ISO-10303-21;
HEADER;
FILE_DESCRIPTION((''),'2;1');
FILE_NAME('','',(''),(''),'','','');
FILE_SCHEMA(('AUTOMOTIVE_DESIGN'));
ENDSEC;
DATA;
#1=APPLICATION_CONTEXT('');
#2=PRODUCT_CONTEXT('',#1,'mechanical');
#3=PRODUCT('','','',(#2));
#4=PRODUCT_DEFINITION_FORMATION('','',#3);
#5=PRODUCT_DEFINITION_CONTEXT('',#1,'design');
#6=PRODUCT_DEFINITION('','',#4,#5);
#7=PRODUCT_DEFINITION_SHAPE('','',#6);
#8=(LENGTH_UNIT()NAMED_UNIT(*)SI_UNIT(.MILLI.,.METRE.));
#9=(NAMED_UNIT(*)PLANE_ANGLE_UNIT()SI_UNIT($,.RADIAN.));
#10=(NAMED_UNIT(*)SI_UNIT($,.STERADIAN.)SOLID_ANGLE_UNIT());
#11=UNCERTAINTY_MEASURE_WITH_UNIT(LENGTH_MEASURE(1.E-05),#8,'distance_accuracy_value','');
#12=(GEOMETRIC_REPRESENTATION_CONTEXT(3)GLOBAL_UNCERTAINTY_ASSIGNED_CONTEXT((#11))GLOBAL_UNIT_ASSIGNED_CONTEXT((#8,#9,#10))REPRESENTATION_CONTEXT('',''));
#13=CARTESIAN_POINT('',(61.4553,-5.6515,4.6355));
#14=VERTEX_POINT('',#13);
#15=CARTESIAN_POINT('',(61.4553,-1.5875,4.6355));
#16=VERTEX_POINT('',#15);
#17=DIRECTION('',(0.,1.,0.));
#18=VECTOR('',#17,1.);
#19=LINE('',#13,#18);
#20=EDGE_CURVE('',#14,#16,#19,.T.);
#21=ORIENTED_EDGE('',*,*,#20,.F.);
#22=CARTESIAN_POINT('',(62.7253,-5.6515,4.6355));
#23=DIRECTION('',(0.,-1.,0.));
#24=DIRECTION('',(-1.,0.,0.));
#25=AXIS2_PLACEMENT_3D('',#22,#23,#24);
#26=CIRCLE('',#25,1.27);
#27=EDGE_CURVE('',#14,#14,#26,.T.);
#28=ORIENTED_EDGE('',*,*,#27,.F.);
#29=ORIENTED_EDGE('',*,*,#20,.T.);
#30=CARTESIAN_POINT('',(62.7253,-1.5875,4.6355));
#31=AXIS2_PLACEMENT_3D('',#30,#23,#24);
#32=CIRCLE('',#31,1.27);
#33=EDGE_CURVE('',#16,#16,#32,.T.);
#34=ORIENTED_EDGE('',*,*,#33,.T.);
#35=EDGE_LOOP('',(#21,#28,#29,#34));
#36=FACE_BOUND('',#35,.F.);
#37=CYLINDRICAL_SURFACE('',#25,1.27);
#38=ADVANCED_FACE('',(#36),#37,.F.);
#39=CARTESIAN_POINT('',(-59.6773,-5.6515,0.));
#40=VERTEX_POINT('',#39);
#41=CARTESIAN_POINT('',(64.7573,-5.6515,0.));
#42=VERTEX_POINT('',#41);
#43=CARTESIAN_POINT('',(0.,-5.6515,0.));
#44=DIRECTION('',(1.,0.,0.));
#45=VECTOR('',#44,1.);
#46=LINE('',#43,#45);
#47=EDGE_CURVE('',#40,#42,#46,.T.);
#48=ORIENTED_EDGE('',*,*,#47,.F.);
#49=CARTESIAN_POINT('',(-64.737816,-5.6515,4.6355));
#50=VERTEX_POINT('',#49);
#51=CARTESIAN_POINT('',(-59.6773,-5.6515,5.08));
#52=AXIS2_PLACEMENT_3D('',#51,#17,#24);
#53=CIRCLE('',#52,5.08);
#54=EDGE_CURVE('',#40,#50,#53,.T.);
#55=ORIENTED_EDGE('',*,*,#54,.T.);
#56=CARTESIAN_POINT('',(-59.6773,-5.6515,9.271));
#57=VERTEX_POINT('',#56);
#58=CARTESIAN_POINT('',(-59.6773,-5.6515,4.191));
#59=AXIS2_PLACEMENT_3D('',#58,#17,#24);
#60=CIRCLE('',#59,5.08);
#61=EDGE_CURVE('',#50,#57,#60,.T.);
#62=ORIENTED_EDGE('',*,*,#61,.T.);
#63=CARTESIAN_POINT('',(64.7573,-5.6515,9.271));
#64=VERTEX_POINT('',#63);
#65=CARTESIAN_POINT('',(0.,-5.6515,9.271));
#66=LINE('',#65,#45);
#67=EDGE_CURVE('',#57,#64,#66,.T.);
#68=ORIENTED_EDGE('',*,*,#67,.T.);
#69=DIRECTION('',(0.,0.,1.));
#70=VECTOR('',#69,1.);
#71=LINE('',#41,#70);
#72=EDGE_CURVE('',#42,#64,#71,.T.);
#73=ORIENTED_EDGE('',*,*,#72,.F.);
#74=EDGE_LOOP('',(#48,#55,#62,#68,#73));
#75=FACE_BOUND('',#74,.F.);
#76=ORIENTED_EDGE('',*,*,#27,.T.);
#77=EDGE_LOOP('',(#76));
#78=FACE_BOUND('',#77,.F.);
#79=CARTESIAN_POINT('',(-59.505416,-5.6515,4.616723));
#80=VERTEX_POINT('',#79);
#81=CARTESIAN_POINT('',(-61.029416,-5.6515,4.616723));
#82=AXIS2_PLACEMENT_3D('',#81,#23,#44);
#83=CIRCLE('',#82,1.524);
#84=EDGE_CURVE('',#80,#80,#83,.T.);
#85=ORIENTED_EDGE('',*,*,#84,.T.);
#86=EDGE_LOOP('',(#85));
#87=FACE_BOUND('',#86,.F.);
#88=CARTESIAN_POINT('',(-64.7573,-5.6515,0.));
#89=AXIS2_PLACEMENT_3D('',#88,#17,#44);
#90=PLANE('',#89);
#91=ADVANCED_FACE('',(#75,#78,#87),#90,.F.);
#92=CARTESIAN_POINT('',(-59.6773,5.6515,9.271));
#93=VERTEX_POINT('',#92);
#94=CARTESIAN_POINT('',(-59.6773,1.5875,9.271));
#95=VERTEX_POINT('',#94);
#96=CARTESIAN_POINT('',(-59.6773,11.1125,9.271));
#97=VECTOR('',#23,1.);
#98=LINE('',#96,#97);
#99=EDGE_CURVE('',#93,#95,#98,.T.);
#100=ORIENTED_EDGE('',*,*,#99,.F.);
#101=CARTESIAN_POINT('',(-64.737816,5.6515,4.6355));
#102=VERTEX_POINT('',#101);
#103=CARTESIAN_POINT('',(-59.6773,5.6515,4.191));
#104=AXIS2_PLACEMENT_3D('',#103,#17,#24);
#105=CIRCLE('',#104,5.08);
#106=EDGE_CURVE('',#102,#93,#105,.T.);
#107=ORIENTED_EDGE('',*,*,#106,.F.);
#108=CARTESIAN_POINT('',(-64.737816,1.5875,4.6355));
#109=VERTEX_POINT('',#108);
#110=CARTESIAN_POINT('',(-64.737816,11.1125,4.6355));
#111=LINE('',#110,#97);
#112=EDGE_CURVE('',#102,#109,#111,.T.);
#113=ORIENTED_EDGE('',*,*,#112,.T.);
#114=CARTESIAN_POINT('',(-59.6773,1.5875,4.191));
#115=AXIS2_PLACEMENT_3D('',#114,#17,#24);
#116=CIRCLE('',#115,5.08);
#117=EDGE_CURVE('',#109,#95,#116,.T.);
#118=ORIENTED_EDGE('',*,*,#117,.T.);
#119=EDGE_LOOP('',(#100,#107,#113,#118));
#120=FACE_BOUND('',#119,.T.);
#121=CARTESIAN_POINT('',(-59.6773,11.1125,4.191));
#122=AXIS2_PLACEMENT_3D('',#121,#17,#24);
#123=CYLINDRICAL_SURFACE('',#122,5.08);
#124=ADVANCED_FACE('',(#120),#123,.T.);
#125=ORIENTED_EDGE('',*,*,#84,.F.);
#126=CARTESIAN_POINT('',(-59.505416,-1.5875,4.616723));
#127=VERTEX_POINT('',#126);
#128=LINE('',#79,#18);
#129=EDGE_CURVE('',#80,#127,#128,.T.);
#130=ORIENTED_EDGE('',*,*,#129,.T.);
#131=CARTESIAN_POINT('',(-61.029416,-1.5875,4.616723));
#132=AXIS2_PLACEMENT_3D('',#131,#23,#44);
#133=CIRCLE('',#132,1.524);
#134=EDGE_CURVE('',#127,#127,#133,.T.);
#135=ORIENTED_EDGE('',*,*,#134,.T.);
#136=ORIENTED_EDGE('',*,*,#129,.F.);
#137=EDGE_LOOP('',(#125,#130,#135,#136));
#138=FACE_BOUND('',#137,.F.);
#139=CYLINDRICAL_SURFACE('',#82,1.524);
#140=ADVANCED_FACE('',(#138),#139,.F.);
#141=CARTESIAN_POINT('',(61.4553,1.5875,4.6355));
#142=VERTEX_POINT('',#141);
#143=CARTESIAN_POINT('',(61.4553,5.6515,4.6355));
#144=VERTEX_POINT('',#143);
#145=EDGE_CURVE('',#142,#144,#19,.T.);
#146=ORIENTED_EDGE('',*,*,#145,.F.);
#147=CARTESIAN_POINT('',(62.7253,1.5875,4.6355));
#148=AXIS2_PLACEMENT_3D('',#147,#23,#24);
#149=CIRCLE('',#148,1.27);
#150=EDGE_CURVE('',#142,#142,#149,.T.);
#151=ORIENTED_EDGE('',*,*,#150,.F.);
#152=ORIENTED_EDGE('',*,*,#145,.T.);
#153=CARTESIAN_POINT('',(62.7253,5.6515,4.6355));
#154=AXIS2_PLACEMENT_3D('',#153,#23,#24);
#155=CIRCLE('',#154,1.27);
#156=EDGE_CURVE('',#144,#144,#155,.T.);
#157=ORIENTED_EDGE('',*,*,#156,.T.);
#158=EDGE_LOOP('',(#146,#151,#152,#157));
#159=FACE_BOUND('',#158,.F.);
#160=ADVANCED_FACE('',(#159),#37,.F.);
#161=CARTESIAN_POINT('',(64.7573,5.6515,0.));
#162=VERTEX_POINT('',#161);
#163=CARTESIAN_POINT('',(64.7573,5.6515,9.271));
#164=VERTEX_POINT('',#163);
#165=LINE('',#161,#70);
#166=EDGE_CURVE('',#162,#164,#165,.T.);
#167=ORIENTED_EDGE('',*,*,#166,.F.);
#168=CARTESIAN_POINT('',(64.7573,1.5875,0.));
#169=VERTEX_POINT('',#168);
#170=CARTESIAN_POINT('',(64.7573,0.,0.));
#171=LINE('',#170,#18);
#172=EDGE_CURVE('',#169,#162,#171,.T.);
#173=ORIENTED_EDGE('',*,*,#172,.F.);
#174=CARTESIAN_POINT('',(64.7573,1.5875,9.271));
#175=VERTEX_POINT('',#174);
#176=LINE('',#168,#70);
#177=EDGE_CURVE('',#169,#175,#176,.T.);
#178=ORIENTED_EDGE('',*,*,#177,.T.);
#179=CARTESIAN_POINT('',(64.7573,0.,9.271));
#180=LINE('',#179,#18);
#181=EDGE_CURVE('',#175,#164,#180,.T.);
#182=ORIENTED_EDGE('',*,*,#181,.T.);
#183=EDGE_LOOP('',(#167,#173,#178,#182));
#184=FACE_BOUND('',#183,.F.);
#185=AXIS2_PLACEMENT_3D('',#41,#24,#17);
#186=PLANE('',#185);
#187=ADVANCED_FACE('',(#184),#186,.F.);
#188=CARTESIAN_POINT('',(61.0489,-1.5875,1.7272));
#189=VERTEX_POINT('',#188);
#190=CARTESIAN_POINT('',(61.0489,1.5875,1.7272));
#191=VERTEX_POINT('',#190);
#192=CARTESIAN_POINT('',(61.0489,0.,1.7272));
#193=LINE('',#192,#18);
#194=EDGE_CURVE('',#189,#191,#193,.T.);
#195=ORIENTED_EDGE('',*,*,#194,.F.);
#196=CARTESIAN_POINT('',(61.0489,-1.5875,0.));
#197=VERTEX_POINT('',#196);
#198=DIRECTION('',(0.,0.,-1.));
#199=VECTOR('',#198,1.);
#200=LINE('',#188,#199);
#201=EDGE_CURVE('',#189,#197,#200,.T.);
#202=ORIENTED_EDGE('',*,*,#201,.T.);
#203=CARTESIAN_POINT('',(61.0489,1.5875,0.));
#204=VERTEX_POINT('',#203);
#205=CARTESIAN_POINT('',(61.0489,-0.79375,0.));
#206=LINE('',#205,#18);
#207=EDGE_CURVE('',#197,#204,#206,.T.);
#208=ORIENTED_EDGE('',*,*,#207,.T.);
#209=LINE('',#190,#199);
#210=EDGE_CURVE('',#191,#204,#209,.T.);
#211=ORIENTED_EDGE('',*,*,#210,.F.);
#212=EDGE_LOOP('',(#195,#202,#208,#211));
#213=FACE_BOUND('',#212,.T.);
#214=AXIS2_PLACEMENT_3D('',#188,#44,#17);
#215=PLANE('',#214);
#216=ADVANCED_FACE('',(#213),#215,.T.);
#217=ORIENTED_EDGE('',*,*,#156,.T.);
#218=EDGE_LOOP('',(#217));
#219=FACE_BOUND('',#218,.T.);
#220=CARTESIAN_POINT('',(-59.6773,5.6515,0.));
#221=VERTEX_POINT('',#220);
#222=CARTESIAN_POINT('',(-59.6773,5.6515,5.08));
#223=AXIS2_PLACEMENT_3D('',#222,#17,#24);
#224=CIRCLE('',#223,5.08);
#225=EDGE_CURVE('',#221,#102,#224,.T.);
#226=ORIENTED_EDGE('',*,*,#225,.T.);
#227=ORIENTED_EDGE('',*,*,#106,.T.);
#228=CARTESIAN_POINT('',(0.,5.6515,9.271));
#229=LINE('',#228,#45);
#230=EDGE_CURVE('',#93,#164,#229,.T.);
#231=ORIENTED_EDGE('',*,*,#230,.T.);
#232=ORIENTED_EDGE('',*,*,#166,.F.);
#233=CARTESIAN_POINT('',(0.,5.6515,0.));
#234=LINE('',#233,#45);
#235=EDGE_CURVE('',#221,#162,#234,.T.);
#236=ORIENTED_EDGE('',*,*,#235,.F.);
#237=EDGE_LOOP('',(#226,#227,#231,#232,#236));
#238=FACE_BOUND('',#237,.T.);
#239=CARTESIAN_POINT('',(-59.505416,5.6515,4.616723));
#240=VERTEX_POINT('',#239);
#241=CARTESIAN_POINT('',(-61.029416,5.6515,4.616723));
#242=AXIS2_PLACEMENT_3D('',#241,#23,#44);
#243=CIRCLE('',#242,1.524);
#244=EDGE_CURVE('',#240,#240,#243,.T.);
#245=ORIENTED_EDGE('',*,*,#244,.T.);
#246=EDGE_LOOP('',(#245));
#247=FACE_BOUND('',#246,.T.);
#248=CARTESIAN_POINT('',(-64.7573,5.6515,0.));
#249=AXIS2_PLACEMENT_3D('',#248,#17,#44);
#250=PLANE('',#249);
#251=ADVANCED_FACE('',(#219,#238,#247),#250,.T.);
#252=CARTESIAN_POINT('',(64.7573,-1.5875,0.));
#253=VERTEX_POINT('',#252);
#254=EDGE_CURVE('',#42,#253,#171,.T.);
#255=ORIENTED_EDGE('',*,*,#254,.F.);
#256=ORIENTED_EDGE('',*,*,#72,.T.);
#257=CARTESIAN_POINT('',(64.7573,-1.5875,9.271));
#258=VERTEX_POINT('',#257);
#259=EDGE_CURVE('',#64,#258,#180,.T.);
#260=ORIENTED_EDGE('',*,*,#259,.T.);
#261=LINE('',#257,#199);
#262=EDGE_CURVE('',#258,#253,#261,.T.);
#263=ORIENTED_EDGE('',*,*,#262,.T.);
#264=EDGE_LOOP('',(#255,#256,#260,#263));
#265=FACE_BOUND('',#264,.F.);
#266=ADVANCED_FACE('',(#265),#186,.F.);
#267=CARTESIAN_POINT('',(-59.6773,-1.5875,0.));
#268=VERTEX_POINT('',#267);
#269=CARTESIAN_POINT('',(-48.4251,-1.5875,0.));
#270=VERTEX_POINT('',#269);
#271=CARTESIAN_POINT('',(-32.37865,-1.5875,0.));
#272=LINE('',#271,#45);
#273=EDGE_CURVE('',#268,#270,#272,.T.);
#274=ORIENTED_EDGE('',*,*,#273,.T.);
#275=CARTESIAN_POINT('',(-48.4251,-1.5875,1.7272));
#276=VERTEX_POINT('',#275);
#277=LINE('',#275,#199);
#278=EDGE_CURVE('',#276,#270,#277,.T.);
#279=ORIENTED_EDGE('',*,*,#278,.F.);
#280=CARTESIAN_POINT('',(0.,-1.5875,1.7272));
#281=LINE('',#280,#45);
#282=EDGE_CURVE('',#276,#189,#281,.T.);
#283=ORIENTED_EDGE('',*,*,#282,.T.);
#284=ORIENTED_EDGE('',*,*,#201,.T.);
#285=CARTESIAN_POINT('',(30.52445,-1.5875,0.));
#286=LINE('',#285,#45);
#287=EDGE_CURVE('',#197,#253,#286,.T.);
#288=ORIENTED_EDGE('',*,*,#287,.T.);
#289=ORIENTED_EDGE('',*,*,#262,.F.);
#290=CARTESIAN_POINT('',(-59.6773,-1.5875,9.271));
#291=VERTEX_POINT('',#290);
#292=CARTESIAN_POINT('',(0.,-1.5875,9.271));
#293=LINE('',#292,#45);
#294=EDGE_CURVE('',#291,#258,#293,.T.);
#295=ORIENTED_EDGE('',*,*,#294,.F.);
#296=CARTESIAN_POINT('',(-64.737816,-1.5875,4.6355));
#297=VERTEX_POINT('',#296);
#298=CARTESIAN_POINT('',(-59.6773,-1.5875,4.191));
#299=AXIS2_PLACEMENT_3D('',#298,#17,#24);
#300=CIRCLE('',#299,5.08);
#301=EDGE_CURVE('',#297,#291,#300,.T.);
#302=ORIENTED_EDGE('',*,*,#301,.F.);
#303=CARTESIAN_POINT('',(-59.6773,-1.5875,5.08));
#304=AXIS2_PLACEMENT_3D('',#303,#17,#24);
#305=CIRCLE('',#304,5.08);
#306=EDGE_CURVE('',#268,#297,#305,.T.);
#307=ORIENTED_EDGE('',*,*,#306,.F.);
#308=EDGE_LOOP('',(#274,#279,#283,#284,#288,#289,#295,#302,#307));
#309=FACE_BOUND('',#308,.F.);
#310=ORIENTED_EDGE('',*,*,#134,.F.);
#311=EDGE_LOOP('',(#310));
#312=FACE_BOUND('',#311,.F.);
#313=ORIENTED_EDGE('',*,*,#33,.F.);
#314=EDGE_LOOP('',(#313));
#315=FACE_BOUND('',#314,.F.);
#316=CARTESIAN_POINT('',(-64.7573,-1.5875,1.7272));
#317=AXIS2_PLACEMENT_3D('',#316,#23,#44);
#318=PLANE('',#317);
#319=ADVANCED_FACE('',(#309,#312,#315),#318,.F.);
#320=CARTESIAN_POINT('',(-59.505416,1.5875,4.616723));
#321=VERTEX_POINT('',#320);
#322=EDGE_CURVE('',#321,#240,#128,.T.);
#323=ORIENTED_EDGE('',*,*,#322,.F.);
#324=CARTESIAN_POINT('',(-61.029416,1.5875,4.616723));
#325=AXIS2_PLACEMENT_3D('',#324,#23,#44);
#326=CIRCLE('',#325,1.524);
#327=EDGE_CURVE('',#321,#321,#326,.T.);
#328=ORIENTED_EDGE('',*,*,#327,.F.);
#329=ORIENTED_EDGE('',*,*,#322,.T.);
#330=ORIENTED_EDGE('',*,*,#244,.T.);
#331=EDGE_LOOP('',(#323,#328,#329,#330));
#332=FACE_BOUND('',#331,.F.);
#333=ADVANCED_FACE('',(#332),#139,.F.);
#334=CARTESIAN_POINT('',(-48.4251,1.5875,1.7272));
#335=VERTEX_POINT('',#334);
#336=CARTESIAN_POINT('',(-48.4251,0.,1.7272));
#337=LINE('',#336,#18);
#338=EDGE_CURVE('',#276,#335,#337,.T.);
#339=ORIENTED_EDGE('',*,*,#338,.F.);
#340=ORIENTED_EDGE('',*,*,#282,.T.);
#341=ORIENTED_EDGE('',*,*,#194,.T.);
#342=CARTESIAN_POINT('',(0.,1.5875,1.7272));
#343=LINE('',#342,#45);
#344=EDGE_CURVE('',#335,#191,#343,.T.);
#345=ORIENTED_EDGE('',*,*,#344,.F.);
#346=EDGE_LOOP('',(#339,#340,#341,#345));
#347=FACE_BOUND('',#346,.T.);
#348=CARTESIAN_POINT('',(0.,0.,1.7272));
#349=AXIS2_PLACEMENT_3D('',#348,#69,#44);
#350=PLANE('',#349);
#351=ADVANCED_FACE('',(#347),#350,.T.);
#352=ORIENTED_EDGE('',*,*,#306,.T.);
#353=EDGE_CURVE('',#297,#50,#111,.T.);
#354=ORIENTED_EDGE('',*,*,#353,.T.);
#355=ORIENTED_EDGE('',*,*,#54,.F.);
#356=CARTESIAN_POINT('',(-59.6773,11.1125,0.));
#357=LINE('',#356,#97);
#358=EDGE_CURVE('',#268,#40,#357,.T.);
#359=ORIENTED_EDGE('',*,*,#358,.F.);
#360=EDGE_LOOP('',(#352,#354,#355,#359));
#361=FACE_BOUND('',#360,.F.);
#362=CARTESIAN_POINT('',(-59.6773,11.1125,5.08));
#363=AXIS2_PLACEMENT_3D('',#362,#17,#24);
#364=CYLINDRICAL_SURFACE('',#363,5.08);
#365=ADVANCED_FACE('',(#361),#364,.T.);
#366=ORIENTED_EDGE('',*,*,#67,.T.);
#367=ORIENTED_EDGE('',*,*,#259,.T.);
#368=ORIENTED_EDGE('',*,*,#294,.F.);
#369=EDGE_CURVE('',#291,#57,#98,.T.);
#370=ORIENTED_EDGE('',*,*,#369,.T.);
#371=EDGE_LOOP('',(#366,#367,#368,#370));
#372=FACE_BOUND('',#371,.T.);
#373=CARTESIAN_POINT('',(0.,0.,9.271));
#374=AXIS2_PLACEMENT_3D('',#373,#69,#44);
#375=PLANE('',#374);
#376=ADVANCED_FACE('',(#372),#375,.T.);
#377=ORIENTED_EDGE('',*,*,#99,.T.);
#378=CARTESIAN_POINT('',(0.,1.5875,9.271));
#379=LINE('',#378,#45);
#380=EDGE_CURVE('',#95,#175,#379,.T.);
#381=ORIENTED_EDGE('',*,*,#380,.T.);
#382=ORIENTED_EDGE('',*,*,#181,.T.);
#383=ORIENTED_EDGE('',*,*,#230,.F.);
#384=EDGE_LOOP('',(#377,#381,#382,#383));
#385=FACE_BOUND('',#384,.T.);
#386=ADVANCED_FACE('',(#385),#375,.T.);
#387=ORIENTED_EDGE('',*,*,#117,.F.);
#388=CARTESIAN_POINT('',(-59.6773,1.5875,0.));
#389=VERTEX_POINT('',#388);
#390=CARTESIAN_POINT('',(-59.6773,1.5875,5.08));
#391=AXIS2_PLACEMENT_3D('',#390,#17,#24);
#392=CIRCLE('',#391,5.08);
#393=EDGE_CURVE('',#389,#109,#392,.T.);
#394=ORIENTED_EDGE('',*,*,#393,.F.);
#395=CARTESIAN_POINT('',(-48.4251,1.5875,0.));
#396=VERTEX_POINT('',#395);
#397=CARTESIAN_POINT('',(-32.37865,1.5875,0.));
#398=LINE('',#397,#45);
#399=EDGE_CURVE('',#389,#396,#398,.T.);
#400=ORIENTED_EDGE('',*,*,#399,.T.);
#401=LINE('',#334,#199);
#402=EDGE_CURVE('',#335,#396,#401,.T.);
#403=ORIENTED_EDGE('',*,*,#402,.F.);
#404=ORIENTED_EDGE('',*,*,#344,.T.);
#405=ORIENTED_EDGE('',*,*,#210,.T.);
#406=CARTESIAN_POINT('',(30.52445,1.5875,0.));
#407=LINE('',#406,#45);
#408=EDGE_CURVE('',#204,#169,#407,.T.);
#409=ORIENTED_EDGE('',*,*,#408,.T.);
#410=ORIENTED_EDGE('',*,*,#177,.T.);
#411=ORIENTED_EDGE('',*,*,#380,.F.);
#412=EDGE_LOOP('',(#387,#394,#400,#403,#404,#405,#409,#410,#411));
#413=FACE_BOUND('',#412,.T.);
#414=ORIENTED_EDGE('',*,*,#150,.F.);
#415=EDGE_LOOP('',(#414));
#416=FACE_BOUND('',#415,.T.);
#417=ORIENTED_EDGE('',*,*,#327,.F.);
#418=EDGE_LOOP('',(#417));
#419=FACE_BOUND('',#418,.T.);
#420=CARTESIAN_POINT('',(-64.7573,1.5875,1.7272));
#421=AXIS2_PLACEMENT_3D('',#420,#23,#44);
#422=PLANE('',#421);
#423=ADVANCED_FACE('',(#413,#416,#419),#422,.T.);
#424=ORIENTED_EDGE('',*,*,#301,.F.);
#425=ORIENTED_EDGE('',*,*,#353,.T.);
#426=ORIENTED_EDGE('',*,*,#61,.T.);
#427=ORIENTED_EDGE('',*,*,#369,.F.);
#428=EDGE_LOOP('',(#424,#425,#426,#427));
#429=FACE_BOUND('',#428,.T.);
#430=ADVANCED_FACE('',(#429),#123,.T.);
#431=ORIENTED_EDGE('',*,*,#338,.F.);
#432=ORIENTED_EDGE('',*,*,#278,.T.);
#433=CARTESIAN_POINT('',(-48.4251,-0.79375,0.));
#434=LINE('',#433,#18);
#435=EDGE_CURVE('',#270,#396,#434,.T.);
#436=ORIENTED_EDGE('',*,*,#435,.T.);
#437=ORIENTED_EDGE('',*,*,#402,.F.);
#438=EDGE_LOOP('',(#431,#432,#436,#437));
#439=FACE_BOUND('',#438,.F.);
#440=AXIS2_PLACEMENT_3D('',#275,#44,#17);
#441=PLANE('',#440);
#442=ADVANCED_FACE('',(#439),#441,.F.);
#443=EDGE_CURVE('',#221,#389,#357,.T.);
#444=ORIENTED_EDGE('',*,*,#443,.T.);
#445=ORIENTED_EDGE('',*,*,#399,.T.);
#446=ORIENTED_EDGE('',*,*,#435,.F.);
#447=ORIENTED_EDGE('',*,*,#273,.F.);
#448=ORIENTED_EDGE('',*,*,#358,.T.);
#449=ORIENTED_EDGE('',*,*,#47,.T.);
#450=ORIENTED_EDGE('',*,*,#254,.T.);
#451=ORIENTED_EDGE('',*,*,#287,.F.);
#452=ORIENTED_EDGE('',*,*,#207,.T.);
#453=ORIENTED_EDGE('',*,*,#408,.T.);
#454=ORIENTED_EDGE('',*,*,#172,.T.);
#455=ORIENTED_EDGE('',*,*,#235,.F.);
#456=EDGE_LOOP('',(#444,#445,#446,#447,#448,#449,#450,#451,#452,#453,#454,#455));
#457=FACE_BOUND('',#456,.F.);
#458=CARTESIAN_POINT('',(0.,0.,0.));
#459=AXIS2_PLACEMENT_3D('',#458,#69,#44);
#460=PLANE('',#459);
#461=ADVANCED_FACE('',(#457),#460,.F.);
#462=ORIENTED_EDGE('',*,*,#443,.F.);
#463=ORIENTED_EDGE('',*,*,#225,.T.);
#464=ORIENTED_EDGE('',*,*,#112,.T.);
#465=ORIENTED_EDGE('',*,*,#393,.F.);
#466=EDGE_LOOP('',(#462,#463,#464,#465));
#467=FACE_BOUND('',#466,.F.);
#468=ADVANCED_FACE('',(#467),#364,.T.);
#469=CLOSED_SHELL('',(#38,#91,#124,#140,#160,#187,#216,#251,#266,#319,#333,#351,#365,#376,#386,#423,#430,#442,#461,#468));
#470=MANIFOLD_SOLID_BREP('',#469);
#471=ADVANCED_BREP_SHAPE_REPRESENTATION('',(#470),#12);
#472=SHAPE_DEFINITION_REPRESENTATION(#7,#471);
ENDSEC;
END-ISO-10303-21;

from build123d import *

# Parameters (mm, degrees)
F0_W        = 129.5146
F0_H        = 11.303
F1_DEPTH    = 9.271
F2_W        = 206.3660303733
F2_H        = 3.175
F3_DEPTH    = 7.5438
F4_W        = 3.7084
F4_H        = 3.175
F5_DEPTH    = 25.4
F6_W        = 16.3322
F6_H        = 3.175
F7_DEPTH    = 25.4
F8_T1_DEPTH = 29.464
F8_T3_DEPTH = 29.464
F9_R        = 1.524
F10_DEPTH   = 25.4
F12_DEPTH   = 25.4
F13_W       = 11.2141259015
F13_H       = 1.2269735361
F14_DEPTH   = 4.1656
F15_DEPTH   = 0.254
F16_DEPTH   = 3.175
F16_FACE_W  = 4.4019735361
F16_FACE_H  = 4.1656
F17_ANGLE   = 90


# Not quite as in the source:
# - a fillet or chamfer that OpenCascade refuses, or shapes differently, is made with other operations: its cross-section is extruded or revolved along the edge and cut away or added


with BuildPart() as f1:
    # F0 (on Top) → F1 (new body)
    with BuildSketch(Plane.XY):
        Rectangle(F0_W, F0_H)
    extrude(amount=F1_DEPTH)

    # F2 (on face) → F3 (cut)
    with BuildSketch(Plane.XY.offset(9.271)):
        Rectangle(F2_W, F2_H)
    extrude(amount=-F3_DEPTH, mode=Mode.SUBTRACT)

    # F4 (on face) → F5 (cut)
    with BuildSketch(Plane.XY.offset(1.7272)):
        with Locations((62.9031, 0)):
            Rectangle(F4_W, F4_H)
    extrude(amount=-F5_DEPTH, mode=Mode.SUBTRACT)

    # F6 (on face) → F7 (cut)
    with BuildSketch(Plane.XY.offset(1.7272)):
        with Locations((-56.5912, 0)):
            Rectangle(F6_W, F6_H)
    extrude(amount=-F7_DEPTH, mode=Mode.SUBTRACT)

    # F8: fillet of radius 5.08 on 4 edges, made by hand

    # F8_s2 → F8_t1 (cut)
    with BuildSketch(Plane.XZ.offset(-11.1125)):
        with BuildLine():
            ThreePointArc((-64.7573, 4.191), (-63.2694024484, 7.7831024484), (-59.6773, 9.271))
            Line((-59.6773, 9.271), (-64.7573, 9.271))
            Line((-64.7573, 9.271), (-64.7573, 4.191))
        make_face()
        with BuildLine():
            ThreePointArc((-64.7573, 5.08), (-63.2694024484, 1.4878975516), (-59.6773, 0))
            Line((-59.6773, 0), (-64.7573, 0))
            Line((-64.7573, 0), (-64.7573, 5.08))
        make_face()
    extrude(amount=F8_T1_DEPTH, mode=Mode.SUBTRACT)

    # F8_s4 → F8_t3 (cut)
    with BuildSketch(Plane.XZ.offset(-18.3515)):
        with BuildLine():
            ThreePointArc((-59.6773, 9.271), (-63.2694024484, 7.7831024484), (-64.7573, 4.191))
            Line((-64.7573, 4.191), (-64.7573, 9.271))
            Line((-64.7573, 9.271), (-59.6773, 9.271))
        make_face()
        with BuildLine():
            ThreePointArc((-64.7573, 5.08), (-63.2694024484, 1.4878975516), (-59.6773, 0))
            Line((-59.6773, 0), (-64.7573, 0))
            Line((-64.7573, 0), (-64.7573, 5.08))
        make_face()
    extrude(amount=F8_T3_DEPTH, mode=Mode.SUBTRACT)

    # F9 (on face) → F10 (cut)
    with BuildSketch(Plane.XZ.offset(5.6515)):
        with Locations((-61.0294157593, 4.6167229302)):
            Circle(F9_R)
    extrude(amount=-F10_DEPTH, mode=Mode.SUBTRACT)

    # F11 (on face) → F12 (cut)
    with BuildSketch(Plane.XZ.offset(5.6515)):
        with BuildLine():
            Line((61.4553, 4.6355), (63.9953, 4.6355))
            ThreePointArc((63.9953, 4.6355), (62.7253, 5.9055), (61.4553, 4.6355))
        make_face()
        with BuildLine():
            ThreePointArc((61.4553, 4.6355), (62.7253, 3.3655), (63.9953, 4.6355))
            Line((63.9953, 4.6355), (61.4553, 4.6355))
        make_face()
    extrude(amount=-F12_DEPTH, mode=Mode.SUBTRACT)


with BuildPart() as f14:
    # F13 (on Top) → F14 (new body)
    with BuildSketch(Plane.XY):
        with Locations((67.7984524518, -0.613486768)):
            Rectangle(F13_W, F13_H)
    extrude(amount=F14_DEPTH)


with BuildPart() as f15:
    # F15 (new): a face of the model
    f15_faces = [f14.part.faces().sort_by_distance(p)[0] for p in [
        (73.4055154026, -0.613486768, 2.0828),
    ]]
    extrude(f15_faces, amount=F15_DEPTH)


with BuildPart() as f14_1:
    add(f14.part)

    # F16 (add): a face of the model
    f16_faces = [f15.part.faces().sort_by_distance(p)[0] for p in [
        (73.5325154026, -1.2269735361, 2.0828),
    ]]

    add(f15.part)  # F16 merges F15
    extrude(f16_faces, amount=F16_DEPTH)


with BuildPart() as f17:
    # F16_face (on face) → F17 (revolve)
    with BuildSketch(Plane(origin=(73.6595154026, -2.200986768, 2.0828), x_dir=(0, 1, 0), z_dir=(1, 0, 0))):
        Rectangle(F16_FACE_W, F16_FACE_H)
    revolve(axis=Axis((73.6595154026, -2.200986768, 0), (0, -1, 0)), revolution_arc=F17_ANGLE)


with BuildPart() as f18_1:
    # F18: instance of F14
    add(f14_1.part.mirror(Plane.XZ))


with BuildPart() as f18_2:
    # F18: instance of F17
    add(f17.part.mirror(Plane.XZ))


solid = f1.part
